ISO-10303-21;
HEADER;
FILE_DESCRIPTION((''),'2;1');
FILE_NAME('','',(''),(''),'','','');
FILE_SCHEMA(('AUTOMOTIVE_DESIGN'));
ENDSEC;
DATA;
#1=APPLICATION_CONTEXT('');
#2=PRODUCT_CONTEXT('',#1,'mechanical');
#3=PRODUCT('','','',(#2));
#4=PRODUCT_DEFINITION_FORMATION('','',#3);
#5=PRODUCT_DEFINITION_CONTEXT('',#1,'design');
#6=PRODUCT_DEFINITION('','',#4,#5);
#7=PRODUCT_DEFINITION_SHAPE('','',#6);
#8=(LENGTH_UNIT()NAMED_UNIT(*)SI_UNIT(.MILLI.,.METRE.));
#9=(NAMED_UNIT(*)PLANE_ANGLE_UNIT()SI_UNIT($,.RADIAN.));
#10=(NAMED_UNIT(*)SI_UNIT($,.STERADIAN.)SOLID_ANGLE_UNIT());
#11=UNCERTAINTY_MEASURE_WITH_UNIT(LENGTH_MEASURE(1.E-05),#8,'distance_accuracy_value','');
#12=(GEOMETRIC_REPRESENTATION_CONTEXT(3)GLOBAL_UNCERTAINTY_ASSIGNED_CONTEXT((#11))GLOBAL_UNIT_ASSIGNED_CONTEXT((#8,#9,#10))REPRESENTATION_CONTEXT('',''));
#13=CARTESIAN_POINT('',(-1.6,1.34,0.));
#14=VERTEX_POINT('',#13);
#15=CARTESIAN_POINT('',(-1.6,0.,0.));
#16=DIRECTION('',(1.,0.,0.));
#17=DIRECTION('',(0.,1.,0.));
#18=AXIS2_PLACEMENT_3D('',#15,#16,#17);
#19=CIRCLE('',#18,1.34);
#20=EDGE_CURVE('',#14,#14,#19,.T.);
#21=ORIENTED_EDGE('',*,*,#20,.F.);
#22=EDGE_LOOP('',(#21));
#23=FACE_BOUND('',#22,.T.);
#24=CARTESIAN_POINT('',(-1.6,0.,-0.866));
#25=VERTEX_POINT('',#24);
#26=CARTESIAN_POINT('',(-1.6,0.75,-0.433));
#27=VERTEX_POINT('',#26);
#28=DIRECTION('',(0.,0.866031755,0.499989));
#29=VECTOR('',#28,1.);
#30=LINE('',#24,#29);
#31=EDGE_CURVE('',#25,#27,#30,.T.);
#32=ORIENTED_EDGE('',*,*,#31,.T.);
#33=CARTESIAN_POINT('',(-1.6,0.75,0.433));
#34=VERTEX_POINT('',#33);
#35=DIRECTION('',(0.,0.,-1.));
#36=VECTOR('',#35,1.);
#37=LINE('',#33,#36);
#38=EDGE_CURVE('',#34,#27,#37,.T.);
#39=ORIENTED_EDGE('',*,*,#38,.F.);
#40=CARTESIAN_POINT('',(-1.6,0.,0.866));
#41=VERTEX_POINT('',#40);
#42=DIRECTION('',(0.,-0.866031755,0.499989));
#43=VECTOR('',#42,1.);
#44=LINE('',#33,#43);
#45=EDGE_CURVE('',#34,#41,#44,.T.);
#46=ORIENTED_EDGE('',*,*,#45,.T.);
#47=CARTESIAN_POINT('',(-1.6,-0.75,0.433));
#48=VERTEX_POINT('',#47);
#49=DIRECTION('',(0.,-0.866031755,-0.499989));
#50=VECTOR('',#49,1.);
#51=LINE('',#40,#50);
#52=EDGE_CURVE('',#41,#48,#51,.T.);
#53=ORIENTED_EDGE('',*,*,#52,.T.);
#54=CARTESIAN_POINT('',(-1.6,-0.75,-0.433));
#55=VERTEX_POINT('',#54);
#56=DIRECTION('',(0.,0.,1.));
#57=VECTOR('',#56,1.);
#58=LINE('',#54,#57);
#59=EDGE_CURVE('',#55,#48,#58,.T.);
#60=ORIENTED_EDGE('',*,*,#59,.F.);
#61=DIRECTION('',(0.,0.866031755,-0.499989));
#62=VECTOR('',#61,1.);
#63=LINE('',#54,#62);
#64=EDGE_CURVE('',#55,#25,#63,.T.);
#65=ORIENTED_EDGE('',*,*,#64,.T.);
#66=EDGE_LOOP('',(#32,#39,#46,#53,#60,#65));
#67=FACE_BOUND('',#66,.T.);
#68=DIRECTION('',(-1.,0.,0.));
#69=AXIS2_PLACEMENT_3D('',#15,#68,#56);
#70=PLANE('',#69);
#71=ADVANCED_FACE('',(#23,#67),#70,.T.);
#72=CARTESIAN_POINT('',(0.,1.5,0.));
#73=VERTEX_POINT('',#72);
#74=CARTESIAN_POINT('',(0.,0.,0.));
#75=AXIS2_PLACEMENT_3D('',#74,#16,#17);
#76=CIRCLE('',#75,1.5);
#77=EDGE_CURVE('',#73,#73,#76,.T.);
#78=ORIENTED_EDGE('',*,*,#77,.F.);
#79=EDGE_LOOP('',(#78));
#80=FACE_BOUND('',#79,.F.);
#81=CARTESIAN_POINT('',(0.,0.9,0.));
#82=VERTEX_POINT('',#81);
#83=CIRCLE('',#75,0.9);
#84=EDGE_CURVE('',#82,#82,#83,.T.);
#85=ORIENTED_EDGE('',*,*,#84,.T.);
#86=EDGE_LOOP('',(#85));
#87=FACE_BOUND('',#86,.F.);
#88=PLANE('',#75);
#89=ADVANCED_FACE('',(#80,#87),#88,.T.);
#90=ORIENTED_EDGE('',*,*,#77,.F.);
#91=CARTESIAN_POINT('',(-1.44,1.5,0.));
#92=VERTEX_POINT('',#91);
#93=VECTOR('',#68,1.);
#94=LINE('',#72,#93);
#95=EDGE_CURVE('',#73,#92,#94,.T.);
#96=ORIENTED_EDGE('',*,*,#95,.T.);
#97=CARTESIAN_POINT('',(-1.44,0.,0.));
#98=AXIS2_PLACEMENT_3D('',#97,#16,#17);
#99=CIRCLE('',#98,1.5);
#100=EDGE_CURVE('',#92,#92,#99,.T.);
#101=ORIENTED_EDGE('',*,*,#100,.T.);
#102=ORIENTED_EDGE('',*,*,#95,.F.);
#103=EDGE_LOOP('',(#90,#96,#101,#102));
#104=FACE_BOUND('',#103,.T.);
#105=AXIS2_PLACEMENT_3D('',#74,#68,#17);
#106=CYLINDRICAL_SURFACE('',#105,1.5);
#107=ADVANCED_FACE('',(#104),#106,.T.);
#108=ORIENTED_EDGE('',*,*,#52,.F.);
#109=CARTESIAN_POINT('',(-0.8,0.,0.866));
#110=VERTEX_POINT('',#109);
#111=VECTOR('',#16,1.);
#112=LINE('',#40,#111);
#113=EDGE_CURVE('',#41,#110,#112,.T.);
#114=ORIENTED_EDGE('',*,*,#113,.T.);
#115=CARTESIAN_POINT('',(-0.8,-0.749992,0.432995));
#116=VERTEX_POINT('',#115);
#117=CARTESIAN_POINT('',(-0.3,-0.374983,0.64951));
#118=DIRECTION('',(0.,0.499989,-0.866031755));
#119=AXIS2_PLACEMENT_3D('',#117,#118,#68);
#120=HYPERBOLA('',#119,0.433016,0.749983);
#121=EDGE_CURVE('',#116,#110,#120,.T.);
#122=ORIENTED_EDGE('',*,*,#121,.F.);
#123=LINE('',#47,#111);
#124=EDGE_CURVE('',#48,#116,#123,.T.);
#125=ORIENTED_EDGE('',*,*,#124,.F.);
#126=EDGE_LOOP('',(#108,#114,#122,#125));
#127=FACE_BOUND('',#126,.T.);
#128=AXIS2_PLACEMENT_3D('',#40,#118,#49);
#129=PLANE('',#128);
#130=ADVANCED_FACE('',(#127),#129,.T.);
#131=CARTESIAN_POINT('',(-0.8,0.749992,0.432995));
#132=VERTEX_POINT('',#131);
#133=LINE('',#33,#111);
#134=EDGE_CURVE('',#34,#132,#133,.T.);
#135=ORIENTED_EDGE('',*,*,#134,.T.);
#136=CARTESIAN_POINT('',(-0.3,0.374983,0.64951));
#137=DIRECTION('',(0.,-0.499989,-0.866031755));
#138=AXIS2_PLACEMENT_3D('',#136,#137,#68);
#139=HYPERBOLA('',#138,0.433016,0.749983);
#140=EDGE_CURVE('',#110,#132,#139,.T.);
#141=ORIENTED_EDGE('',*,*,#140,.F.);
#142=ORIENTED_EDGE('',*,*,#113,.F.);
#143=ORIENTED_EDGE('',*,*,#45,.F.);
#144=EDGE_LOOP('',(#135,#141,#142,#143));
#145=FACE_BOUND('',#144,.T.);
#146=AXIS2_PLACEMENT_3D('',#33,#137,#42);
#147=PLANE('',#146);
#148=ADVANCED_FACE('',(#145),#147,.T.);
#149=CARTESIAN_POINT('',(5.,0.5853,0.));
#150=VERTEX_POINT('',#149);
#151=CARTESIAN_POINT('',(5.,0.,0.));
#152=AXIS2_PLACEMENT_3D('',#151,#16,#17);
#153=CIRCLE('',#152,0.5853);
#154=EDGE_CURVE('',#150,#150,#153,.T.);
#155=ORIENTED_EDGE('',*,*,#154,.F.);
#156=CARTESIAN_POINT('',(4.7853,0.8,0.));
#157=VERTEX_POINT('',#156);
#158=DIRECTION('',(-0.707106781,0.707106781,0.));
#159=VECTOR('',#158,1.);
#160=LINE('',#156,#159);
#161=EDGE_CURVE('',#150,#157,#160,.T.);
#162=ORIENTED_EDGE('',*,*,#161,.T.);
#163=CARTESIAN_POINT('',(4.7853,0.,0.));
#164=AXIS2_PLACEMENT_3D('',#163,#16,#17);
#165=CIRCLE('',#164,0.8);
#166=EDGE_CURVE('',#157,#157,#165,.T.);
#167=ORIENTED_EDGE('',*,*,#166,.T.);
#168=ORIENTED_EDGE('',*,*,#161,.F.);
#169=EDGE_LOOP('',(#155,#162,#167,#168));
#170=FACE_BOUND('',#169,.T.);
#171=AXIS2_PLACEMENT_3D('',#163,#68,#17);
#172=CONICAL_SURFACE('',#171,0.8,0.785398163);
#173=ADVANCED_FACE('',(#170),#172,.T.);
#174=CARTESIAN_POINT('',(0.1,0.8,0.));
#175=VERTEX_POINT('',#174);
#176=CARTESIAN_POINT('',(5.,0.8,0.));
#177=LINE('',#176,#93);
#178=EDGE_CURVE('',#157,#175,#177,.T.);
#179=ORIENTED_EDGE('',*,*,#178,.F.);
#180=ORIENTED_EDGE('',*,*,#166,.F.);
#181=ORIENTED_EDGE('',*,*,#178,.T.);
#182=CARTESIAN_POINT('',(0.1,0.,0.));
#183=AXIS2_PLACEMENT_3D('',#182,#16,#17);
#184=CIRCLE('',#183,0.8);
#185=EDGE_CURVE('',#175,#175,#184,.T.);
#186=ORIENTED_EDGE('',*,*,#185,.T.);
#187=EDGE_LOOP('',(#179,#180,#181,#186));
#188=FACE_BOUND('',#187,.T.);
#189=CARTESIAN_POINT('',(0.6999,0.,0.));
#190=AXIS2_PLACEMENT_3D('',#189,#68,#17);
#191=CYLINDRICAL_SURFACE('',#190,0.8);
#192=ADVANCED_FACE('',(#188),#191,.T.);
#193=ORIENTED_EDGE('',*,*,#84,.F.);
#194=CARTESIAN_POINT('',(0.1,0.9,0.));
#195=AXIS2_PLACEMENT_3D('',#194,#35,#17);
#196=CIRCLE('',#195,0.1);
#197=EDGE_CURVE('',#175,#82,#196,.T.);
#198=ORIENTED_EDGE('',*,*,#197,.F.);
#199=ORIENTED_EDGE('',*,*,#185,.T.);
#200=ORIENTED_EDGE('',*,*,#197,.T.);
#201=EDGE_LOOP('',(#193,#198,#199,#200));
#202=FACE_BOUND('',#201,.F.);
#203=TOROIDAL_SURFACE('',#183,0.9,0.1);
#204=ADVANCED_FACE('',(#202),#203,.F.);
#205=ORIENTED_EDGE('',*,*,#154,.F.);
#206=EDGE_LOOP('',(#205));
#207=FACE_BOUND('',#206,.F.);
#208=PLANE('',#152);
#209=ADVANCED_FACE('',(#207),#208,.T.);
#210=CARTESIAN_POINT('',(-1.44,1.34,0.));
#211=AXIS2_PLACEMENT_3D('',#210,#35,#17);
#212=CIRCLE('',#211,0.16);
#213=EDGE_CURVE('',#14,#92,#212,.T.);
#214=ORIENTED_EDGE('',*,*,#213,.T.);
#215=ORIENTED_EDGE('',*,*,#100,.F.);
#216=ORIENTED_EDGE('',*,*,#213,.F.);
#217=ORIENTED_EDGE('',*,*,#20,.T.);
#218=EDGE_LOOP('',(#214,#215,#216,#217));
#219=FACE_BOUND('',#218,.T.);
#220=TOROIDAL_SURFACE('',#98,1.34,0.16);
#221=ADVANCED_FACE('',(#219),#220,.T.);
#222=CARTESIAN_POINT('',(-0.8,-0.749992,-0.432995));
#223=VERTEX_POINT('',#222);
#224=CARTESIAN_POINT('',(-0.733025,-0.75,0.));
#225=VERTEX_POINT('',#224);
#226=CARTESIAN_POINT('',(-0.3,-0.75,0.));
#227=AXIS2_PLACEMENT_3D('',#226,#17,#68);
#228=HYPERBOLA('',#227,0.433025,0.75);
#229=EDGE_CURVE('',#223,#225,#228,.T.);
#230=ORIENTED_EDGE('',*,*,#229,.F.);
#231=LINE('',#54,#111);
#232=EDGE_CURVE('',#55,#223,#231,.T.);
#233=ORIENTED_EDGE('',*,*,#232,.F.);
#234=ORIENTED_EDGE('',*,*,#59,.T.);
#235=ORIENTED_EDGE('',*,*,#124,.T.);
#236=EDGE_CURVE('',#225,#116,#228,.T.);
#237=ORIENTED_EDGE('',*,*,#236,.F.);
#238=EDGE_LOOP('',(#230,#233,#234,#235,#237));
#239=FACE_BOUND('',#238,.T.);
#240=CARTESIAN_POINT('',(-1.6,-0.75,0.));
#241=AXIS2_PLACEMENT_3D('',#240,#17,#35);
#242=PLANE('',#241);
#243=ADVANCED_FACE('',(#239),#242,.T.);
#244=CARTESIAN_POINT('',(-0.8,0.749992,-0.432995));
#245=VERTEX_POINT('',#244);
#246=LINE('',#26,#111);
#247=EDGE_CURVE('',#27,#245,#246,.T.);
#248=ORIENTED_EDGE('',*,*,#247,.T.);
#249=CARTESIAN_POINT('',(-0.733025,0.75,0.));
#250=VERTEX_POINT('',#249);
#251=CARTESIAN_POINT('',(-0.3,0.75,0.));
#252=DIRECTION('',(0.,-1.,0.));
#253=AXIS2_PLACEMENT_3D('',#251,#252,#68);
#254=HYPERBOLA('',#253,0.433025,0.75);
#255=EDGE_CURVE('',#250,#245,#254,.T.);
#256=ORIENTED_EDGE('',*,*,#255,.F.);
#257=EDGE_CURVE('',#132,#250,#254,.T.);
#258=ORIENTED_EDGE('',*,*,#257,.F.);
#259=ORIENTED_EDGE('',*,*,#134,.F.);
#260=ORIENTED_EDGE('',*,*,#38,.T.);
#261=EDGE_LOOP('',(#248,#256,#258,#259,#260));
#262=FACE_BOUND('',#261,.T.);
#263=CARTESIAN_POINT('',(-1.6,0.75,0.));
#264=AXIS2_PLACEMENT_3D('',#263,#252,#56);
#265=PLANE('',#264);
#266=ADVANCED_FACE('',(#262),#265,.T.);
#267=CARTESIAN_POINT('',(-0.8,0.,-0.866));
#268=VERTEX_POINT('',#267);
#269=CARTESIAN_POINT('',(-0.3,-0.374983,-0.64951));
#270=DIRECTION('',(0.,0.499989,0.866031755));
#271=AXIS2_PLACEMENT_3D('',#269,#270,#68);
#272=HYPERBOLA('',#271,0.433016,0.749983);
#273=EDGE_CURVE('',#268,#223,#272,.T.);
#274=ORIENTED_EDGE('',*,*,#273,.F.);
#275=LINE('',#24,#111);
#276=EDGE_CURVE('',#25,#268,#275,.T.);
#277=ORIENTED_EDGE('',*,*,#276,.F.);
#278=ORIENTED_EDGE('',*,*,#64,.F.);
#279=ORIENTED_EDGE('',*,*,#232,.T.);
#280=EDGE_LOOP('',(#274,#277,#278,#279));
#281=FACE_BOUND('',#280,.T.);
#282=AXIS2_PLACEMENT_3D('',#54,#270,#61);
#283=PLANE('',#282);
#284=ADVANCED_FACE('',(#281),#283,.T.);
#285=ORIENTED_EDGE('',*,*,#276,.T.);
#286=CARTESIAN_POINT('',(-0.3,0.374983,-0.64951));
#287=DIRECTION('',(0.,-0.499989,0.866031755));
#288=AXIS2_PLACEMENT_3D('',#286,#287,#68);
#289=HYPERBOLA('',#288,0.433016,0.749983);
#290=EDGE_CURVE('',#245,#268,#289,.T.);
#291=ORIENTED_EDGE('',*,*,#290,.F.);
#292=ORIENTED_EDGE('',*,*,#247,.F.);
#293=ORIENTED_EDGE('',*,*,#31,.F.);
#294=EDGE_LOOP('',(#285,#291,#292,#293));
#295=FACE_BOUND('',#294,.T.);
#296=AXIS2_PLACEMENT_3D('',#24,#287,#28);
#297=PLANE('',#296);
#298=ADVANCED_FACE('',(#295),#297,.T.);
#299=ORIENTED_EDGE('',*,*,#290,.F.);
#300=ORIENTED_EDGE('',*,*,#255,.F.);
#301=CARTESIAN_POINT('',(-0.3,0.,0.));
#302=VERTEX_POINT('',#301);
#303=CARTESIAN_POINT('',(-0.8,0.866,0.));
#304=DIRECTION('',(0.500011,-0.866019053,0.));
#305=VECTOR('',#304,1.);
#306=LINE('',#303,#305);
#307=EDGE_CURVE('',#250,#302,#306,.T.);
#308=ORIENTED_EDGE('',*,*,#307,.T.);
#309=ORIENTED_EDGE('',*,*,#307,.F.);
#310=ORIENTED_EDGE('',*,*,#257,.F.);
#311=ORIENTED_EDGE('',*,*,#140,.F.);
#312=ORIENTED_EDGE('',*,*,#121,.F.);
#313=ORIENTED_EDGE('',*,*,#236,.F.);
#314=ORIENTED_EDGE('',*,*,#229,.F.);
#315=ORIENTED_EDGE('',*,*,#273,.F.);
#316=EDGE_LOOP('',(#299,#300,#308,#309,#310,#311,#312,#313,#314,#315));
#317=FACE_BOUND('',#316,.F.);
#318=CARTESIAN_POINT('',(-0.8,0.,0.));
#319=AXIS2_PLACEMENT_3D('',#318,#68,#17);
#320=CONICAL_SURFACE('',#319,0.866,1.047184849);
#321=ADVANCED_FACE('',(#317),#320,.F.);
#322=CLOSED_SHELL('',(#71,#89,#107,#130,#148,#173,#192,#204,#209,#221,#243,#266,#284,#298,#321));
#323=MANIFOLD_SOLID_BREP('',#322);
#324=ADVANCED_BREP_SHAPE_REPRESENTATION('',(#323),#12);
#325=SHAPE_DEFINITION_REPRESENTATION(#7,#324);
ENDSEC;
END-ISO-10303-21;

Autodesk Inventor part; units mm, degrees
ref_plane "YZ Plane" through (0, 0, 0) normal (1, 0, 0) x (0, 1, 0)
ref_plane "XZ Plane" through (0, 0, 0) normal (0, 1, 0) x (-1, 0, 0)
sketch "Sketch1" plane through (0, 0, 0) normal (0, 0, 1) x (1, 0, 0)
  line L0 (-0.3, 0) -> (5, 0)
  line L1 (5, 0) -> (5, 0.8)
  line L2 (5, 0.8) -> (0.9147, 0.8)
  line L3 (0.9147, 0.8) -> (0.6999, 0.8)
  line L4 (0.6999, 0.8) -> (0, 0.8)
  line L5 (0, 0.8) -> (0, 1.5)
  line L6 (0, 1.5) -> (-1.6, 1.5)
  line L7 (-1.6, 1.5) -> (-1.6, 0.866)
  line L8 (-1.6, 0.866) -> (-0.8, 0.866)
  line L9 (-0.8, 0.866) -> (-0.3, 0)
  line L10 (-2.92, 0) -> (6.32, 0) projected
  line L11 (0, -0.3) -> (0, 1.8) projected
  line L12 (0.9147, 0.8) -> (0, 0.8) construction
  dimension "d1" = 4.0853
  dimension "d2" = 0.2148
  dimension "d3" = 1.6
  dimension "d4" = 0.8
  dimension "d5" = 60
  dimension "d6" = 1.6
  dimension "d7" = 1.6
  dimension "d8" = 1.7321
  dimension "d9" = 3
  dimension "d26" = 5
revolve "Body" add sketch "Sketch1" angle 360 about axis through (-0.3, 0, 0) along (1, 0, 0)
sketch "Sketch2" plane through (-1.6, 0, 0) normal (-1, 0, 0) x (0, 0, 1)
  circle A0 centre (0, 0) radius 0.866 projected
  line L0 (0, -2.1) -> (0, 2.1) projected
  line L1 (-2.1, 0) -> (2.1, 0) projected
  line L2 (0.866, 0) -> (0.433, -0.75)
  line L3 (0.433, -0.75) -> (-0.433, -0.75)
  line L4 (-0.433, -0.75) -> (-0.866, 0)
  line L5 (-0.866, 0) -> (-0.433, 0.75)
  line L6 (-0.433, 0.75) -> (0.433, 0.75)
  line L7 (0.433, 0.75) -> (0.866, 0)
extrude "Slot" add sketch "Sketch2" against normal up to next contours L7 A0 | A0 L2 | L6 L0 A0 | A0 L0 L3 | L0 L6 A0 | A0 L3 L0 | L4 A0 | A0 L5
fillet "Fillet1" radius 0.16 1 edges at (-1.6, -1.5, 0)
thread "Thread" size "M1.6x0.35" class "6g" standard "ISO Metric profile" length 4.0853
chamfer "Chamfer1" distance 0.2147 distance2 0.2147 1 edges at (5, -0.8, 0) measured on face at (5, -0.0946, 0.2493)
ref_plane "Work Plane1" through (29, 0, 0) normal (0, -1, 0) x (1, 0, 0)
fillet "Fillet2" radius 0.1 1 edges at (0, -0.8, 0)
equation "\"d1\" = GEL"
equation "\"d3\" = KOH"
equation "\"d4\" = INTI"
equation "\"d6\" = GD"
equation "\"d7\" = BDM"
equation "\"d8\" = 1.1547 * SW"
equation "\"d9\" = KOD"
equation "\"d26\" = NLG"
equation "\"d30\" = R"
equation "\"d17\" = RR"
equation "\"d13\" = GEL"
equation "\"d15\" = -0.5 * SPD + 0.5 * GD"
equation "\"d16\" = GUL"
equation "\"GD\" = NND"
equation "\"NLG\" = 5"
equation "\"GEL\" = 4.08529"
equation "\"KOD\" = 3"
equation "\"KOH\" = 1.6"
equation "\"INTI\" = 0.8"
equation "\"GAL\" = 0.61345 * PTC"
equation "\"GUL\" = 0.61345 * PTC"
equation "\"BDM\" = NND"
equation "\"SW\" = 1.5"
equation "\"RR\" = 0.16"
equation "\"SPD\" = 1.17058"
equation "\"R\" = 0.1"
equation "\"TOA\" = 30deg"
equation "\"THREADDIA\" = 1.6"
equation "\"PTC\" = 0.35"
equation "\"NND\" = 1.6"
equation "\"E0\" = 1.155 * SW"
equation "\"GD1\" = THREADDIA - 1.2269 * PTC"
properties part number "ANSI B18.3.1M - M1.6x0.35 x 5, FSHCSM" material "Steel, Mild"
